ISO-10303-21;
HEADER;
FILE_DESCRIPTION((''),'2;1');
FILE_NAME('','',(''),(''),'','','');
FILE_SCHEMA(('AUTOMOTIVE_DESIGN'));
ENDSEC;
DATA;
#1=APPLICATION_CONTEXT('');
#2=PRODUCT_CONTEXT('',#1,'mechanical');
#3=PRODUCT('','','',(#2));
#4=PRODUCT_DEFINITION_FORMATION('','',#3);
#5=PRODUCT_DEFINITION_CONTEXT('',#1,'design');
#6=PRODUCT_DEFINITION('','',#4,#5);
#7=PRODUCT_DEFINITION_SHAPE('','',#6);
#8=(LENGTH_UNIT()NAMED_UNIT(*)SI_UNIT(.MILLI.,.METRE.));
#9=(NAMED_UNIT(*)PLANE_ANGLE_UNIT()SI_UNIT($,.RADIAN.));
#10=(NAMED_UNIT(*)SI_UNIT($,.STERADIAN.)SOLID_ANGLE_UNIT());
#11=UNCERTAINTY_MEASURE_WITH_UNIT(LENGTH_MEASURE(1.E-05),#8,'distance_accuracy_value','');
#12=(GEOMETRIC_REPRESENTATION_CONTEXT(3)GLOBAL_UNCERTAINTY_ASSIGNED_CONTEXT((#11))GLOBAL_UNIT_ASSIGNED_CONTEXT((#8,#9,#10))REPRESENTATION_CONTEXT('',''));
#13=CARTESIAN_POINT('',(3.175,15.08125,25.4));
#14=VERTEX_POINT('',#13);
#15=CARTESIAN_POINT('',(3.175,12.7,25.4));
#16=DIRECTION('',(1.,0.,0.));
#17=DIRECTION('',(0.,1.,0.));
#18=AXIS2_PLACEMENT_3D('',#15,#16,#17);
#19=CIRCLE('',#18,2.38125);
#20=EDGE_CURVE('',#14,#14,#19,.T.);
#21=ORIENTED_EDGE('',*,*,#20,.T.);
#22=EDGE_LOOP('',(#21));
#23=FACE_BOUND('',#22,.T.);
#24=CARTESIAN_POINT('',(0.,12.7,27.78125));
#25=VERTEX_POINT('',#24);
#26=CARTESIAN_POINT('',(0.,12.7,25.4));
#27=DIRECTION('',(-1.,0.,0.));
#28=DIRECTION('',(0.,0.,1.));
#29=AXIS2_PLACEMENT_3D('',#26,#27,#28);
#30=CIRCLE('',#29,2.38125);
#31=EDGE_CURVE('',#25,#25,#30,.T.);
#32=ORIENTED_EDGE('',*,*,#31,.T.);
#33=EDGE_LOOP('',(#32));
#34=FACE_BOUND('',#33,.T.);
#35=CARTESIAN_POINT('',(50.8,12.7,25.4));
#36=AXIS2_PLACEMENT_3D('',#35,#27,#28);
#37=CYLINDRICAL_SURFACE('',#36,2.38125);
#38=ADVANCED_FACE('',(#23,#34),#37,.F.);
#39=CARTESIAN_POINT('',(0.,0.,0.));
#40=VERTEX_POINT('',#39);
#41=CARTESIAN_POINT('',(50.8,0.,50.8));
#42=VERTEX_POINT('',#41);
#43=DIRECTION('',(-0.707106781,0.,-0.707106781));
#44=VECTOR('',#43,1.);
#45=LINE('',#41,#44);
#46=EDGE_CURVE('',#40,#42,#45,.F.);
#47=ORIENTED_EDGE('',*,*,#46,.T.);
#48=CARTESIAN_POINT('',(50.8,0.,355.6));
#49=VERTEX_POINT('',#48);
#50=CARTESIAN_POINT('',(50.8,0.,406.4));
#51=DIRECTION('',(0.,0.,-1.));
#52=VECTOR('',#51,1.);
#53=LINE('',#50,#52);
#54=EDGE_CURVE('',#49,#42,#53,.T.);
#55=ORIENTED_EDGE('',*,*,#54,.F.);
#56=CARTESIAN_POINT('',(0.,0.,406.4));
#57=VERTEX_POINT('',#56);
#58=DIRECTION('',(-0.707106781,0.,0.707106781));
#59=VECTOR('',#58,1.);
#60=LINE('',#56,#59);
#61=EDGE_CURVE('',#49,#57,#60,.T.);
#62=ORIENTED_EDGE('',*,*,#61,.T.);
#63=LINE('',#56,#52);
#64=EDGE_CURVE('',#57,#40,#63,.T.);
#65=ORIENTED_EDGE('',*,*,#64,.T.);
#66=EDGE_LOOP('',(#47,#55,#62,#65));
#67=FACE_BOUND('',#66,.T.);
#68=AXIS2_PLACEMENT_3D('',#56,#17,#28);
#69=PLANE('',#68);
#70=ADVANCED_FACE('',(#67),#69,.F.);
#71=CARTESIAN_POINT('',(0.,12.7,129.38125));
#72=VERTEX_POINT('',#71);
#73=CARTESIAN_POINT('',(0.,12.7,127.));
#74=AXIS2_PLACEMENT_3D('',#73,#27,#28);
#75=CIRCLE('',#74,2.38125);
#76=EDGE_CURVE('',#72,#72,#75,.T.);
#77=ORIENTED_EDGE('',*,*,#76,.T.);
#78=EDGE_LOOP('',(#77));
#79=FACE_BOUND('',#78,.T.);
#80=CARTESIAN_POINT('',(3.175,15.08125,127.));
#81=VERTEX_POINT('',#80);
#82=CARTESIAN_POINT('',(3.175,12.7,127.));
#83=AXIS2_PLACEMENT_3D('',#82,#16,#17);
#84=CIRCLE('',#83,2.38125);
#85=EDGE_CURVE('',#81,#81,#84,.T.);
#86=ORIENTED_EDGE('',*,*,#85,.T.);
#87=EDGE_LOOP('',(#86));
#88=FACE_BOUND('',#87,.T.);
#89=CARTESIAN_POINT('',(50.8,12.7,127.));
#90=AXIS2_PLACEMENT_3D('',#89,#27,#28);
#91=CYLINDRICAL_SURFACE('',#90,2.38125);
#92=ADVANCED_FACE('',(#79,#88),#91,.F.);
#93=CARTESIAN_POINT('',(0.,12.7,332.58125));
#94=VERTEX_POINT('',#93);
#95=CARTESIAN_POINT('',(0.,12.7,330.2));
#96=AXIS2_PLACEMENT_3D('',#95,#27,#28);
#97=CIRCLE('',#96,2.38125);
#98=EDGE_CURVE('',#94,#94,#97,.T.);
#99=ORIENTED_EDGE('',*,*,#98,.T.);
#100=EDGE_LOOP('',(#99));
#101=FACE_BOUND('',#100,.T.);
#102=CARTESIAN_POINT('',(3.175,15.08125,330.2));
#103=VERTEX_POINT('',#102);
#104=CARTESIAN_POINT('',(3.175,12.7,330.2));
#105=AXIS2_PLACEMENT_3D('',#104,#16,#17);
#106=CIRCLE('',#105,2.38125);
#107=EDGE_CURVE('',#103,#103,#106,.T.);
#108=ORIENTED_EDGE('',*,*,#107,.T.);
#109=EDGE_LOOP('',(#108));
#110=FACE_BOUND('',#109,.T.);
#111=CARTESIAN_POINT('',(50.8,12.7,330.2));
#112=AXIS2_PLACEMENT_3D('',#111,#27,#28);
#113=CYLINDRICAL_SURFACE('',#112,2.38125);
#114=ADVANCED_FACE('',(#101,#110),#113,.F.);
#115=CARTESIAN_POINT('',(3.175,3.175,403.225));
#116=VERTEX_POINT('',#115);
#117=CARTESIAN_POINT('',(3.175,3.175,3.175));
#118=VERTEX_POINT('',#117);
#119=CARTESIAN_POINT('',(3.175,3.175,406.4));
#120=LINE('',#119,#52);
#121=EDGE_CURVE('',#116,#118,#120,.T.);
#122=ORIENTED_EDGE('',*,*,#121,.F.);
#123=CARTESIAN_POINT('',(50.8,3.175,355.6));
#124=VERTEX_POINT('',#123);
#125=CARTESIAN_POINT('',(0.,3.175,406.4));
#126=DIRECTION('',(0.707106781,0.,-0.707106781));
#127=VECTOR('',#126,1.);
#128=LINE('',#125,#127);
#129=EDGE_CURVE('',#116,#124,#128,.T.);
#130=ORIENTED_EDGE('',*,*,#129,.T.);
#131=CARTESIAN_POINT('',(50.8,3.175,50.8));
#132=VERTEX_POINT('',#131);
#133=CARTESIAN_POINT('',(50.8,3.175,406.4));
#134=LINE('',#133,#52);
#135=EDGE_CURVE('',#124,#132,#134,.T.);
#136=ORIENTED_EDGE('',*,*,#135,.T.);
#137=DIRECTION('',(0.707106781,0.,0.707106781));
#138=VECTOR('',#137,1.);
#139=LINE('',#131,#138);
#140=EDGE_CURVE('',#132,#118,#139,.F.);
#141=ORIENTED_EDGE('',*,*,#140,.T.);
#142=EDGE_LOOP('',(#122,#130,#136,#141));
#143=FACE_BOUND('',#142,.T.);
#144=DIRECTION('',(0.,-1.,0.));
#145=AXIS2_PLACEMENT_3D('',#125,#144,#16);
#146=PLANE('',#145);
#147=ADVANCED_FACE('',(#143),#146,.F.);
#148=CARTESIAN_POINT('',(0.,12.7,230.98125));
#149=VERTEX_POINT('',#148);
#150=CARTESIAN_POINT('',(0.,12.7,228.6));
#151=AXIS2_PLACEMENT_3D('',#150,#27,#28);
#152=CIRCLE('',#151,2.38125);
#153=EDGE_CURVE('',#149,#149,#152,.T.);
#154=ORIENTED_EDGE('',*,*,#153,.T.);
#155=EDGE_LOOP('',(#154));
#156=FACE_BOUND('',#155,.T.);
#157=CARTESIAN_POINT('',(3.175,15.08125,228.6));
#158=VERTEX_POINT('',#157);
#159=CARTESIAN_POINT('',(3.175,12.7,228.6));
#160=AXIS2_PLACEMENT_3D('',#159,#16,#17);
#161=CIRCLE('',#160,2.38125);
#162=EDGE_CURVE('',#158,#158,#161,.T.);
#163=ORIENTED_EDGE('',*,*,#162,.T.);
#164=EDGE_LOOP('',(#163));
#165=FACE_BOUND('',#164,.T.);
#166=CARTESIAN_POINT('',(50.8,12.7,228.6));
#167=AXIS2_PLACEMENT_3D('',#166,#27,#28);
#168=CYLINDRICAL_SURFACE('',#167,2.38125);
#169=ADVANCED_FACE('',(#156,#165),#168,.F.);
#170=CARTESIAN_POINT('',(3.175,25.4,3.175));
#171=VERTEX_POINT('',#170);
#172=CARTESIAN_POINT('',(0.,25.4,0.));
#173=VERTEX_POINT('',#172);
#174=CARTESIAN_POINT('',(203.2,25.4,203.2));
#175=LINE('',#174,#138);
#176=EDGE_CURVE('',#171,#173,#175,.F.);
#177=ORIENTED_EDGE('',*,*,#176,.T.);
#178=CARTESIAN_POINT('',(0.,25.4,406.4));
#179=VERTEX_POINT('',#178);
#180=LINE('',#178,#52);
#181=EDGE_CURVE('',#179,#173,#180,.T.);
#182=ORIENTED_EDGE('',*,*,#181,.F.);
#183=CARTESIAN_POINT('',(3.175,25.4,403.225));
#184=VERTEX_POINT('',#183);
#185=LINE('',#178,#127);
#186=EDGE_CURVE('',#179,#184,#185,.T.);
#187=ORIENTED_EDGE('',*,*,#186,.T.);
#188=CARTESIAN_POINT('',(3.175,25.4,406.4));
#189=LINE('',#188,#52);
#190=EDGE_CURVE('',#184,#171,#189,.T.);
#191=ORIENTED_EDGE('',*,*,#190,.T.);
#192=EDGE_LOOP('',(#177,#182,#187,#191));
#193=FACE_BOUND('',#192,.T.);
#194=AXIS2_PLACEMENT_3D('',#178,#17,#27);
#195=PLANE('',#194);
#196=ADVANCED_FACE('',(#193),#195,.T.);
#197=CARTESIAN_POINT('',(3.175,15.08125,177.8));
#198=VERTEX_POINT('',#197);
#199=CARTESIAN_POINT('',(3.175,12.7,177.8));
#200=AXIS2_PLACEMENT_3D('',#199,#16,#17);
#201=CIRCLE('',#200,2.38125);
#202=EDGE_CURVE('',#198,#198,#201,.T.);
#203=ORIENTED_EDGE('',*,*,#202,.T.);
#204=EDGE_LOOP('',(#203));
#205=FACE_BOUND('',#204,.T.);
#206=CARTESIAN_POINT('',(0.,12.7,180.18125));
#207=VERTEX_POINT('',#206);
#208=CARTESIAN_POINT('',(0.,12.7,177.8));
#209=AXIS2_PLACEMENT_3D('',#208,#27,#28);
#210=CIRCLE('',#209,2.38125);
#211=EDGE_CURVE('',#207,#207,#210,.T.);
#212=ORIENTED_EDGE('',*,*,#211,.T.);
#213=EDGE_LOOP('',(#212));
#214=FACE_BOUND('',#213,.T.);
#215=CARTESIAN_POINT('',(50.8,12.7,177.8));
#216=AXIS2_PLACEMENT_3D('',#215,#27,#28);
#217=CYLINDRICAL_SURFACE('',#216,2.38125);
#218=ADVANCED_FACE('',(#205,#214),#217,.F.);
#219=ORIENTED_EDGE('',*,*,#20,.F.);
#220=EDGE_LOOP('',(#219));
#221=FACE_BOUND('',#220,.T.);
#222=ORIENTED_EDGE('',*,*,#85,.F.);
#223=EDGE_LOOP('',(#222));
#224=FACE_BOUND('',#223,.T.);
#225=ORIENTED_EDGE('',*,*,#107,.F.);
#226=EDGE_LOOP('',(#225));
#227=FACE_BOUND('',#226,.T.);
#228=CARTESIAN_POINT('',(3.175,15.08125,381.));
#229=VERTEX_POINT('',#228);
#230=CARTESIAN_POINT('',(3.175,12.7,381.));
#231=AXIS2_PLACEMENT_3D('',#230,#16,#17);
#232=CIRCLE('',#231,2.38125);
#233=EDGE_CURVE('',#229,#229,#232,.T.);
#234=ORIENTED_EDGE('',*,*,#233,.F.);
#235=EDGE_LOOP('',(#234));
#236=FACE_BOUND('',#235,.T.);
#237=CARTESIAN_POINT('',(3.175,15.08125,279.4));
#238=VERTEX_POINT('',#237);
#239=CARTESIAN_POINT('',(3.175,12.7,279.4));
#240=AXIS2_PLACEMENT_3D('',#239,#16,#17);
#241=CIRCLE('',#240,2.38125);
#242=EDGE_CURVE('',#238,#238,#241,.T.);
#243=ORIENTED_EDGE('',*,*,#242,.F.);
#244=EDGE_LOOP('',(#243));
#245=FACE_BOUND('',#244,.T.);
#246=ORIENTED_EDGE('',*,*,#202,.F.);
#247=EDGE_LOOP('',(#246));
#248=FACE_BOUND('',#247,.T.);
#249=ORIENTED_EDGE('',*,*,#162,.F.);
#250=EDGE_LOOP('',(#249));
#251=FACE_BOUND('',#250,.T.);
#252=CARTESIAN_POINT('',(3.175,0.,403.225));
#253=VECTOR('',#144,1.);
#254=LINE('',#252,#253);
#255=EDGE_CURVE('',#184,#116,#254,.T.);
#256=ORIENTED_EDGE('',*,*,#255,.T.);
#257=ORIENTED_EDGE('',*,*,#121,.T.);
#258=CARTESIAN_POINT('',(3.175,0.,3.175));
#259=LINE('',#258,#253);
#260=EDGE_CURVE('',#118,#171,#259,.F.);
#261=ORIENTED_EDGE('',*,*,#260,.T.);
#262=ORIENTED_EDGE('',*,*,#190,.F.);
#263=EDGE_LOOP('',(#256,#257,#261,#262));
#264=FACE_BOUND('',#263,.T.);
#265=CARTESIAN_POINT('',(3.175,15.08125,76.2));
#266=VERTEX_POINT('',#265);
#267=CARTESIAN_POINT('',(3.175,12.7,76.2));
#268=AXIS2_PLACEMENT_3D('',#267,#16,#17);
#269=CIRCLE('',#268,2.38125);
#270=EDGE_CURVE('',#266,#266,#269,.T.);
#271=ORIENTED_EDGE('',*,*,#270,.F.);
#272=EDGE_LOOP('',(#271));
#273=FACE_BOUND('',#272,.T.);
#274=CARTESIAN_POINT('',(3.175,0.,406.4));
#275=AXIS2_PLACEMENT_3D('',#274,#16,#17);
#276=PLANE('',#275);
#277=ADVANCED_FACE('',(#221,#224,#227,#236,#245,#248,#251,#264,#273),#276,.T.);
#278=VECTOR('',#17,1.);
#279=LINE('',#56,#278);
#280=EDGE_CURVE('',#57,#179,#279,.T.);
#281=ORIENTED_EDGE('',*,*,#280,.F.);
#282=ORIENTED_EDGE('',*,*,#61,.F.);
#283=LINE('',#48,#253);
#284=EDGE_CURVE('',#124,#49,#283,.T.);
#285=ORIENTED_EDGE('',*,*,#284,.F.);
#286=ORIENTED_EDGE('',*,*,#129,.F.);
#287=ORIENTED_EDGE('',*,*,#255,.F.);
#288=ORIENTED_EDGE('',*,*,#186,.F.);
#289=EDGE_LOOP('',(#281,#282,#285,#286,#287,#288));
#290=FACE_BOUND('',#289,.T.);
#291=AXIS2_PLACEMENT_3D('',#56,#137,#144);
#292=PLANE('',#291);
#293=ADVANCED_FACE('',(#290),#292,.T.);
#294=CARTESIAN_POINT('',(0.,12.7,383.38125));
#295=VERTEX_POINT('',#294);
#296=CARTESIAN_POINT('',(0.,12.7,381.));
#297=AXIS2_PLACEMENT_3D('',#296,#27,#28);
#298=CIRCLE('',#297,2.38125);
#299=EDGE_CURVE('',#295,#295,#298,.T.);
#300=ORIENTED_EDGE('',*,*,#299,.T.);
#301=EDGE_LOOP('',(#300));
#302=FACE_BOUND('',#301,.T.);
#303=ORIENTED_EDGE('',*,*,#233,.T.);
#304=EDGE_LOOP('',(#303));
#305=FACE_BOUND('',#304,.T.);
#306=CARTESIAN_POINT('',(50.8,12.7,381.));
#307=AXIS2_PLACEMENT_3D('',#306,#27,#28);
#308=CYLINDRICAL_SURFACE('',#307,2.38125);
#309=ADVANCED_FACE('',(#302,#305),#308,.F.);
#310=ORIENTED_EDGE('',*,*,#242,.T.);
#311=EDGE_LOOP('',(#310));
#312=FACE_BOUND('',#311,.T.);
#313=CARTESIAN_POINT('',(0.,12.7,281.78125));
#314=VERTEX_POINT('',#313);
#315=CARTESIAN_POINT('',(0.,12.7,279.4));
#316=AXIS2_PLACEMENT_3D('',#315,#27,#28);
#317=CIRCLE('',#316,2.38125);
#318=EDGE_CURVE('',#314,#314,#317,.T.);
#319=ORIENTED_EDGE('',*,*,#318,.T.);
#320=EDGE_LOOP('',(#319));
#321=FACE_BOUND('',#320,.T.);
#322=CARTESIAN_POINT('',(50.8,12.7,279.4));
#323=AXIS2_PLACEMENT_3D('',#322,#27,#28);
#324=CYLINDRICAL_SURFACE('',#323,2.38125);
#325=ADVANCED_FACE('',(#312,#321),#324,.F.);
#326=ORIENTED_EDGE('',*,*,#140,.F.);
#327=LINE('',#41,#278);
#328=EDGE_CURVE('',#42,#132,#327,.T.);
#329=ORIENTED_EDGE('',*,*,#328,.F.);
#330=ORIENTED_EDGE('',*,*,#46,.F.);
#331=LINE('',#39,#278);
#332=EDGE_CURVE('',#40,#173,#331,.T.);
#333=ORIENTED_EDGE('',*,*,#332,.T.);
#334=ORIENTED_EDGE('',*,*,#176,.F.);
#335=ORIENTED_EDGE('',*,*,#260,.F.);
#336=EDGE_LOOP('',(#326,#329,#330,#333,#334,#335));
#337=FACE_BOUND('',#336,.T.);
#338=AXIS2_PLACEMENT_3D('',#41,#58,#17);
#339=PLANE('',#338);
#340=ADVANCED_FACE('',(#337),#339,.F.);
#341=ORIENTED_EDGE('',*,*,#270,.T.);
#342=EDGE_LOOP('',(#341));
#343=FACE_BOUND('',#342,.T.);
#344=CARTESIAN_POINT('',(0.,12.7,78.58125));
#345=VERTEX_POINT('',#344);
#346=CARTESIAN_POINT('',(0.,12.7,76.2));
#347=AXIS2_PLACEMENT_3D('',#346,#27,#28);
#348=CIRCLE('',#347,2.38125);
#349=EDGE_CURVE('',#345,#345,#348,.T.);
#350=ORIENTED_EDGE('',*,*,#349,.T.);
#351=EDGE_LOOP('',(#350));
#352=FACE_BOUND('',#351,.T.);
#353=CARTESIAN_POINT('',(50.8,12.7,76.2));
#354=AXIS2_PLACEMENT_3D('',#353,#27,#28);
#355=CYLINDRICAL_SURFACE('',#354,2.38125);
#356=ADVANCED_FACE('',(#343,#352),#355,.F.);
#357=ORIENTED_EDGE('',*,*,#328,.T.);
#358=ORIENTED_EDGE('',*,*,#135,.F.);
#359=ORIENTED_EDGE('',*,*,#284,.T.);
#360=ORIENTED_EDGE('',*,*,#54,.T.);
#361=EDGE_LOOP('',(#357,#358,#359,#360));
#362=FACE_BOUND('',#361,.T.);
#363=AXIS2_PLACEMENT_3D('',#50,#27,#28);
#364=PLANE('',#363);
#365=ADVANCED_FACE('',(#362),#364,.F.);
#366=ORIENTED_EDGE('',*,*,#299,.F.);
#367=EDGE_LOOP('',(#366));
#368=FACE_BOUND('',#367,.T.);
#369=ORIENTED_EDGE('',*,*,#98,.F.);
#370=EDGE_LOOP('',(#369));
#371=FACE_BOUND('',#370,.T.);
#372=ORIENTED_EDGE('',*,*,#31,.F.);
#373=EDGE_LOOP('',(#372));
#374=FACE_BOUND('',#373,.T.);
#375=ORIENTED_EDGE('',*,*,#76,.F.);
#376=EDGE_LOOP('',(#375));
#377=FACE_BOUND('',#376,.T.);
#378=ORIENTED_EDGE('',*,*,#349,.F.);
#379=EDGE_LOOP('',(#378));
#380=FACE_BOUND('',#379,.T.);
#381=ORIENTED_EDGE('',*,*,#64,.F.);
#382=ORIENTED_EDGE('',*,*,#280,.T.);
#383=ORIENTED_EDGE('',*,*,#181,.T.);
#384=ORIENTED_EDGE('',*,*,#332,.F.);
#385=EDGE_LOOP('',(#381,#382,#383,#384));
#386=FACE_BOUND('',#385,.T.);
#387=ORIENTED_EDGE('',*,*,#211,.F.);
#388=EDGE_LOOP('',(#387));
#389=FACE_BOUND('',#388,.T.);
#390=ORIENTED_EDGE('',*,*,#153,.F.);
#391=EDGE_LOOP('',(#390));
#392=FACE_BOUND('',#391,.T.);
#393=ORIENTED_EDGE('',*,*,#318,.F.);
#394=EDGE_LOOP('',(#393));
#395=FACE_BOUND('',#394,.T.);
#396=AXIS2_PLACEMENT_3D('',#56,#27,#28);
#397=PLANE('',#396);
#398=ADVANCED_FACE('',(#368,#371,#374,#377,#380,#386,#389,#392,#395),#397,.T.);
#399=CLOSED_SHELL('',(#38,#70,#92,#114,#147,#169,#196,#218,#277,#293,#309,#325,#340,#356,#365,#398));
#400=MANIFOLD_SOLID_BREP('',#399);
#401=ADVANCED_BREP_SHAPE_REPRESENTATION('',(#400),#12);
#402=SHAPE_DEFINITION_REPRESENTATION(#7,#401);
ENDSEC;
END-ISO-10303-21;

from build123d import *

# Parameters (mm, degrees)
BOSS_EXTRUDE1_DEPTH = 406.4
SKETCH2_R           = 2.38125
CUT_EXTRUDE1_DEPTH  = 411.349558304
CHAMFER1_SIZE       = 50.8
CHAMFER2_SIZE       = 50.8


with BuildPart() as part:
    # Sketch1 → Boss-Extrude1 (new body)
    with BuildSketch(Plane.XY):
        Polygon((0, 25.4), (0, 0), (50.8, 0), (50.8, 3.175), (3.175, 3.175), (3.175, 25.4), align=None)
    extrude(amount=BOSS_EXTRUDE1_DEPTH)

    # Sketch2 → Cut-Extrude1 (cut, through all)
    with BuildSketch(Plane.ZY):
        with Locations((381, 12.7)):
            Circle(SKETCH2_R)
        with Locations((330.2, 12.7)):
            Circle(SKETCH2_R)
        with Locations((279.4, 12.7)):
            Circle(SKETCH2_R)
        with Locations((228.6, 12.7)):
            Circle(SKETCH2_R)
        with Locations((177.8, 12.7)):
            Circle(SKETCH2_R)
        with Locations((127, 12.7)):
            Circle(SKETCH2_R)
        with Locations((76.2, 12.7)):
            Circle(SKETCH2_R)
        with Locations((25.4, 12.7)):
            Circle(SKETCH2_R)
        with Locations((-25.4, 12.7)):
            Circle(SKETCH2_R)
        with Locations((-76.2, 12.7)):
            Circle(SKETCH2_R)
    extrude(amount=-CUT_EXTRUDE1_DEPTH, mode=Mode.SUBTRACT)

    # Chamfer1
    chamfer1_edges = [part.edges().sort_by_distance(p)[0] for p in [
        (50.8, 1.5875, 406.4),
    ]]
    chamfer(chamfer1_edges, length=CHAMFER1_SIZE - 0.0001)  # a hair under: the kernel refuses the full size

    # Chamfer2
    chamfer2_edges = [part.edges().sort_by_distance(p)[0] for p in [
        (50.8, 1.5875, 0),
    ]]
    chamfer(chamfer2_edges, length=CHAMFER2_SIZE - 0.0001)  # a hair under: the kernel refuses the full size


solid = part.part
